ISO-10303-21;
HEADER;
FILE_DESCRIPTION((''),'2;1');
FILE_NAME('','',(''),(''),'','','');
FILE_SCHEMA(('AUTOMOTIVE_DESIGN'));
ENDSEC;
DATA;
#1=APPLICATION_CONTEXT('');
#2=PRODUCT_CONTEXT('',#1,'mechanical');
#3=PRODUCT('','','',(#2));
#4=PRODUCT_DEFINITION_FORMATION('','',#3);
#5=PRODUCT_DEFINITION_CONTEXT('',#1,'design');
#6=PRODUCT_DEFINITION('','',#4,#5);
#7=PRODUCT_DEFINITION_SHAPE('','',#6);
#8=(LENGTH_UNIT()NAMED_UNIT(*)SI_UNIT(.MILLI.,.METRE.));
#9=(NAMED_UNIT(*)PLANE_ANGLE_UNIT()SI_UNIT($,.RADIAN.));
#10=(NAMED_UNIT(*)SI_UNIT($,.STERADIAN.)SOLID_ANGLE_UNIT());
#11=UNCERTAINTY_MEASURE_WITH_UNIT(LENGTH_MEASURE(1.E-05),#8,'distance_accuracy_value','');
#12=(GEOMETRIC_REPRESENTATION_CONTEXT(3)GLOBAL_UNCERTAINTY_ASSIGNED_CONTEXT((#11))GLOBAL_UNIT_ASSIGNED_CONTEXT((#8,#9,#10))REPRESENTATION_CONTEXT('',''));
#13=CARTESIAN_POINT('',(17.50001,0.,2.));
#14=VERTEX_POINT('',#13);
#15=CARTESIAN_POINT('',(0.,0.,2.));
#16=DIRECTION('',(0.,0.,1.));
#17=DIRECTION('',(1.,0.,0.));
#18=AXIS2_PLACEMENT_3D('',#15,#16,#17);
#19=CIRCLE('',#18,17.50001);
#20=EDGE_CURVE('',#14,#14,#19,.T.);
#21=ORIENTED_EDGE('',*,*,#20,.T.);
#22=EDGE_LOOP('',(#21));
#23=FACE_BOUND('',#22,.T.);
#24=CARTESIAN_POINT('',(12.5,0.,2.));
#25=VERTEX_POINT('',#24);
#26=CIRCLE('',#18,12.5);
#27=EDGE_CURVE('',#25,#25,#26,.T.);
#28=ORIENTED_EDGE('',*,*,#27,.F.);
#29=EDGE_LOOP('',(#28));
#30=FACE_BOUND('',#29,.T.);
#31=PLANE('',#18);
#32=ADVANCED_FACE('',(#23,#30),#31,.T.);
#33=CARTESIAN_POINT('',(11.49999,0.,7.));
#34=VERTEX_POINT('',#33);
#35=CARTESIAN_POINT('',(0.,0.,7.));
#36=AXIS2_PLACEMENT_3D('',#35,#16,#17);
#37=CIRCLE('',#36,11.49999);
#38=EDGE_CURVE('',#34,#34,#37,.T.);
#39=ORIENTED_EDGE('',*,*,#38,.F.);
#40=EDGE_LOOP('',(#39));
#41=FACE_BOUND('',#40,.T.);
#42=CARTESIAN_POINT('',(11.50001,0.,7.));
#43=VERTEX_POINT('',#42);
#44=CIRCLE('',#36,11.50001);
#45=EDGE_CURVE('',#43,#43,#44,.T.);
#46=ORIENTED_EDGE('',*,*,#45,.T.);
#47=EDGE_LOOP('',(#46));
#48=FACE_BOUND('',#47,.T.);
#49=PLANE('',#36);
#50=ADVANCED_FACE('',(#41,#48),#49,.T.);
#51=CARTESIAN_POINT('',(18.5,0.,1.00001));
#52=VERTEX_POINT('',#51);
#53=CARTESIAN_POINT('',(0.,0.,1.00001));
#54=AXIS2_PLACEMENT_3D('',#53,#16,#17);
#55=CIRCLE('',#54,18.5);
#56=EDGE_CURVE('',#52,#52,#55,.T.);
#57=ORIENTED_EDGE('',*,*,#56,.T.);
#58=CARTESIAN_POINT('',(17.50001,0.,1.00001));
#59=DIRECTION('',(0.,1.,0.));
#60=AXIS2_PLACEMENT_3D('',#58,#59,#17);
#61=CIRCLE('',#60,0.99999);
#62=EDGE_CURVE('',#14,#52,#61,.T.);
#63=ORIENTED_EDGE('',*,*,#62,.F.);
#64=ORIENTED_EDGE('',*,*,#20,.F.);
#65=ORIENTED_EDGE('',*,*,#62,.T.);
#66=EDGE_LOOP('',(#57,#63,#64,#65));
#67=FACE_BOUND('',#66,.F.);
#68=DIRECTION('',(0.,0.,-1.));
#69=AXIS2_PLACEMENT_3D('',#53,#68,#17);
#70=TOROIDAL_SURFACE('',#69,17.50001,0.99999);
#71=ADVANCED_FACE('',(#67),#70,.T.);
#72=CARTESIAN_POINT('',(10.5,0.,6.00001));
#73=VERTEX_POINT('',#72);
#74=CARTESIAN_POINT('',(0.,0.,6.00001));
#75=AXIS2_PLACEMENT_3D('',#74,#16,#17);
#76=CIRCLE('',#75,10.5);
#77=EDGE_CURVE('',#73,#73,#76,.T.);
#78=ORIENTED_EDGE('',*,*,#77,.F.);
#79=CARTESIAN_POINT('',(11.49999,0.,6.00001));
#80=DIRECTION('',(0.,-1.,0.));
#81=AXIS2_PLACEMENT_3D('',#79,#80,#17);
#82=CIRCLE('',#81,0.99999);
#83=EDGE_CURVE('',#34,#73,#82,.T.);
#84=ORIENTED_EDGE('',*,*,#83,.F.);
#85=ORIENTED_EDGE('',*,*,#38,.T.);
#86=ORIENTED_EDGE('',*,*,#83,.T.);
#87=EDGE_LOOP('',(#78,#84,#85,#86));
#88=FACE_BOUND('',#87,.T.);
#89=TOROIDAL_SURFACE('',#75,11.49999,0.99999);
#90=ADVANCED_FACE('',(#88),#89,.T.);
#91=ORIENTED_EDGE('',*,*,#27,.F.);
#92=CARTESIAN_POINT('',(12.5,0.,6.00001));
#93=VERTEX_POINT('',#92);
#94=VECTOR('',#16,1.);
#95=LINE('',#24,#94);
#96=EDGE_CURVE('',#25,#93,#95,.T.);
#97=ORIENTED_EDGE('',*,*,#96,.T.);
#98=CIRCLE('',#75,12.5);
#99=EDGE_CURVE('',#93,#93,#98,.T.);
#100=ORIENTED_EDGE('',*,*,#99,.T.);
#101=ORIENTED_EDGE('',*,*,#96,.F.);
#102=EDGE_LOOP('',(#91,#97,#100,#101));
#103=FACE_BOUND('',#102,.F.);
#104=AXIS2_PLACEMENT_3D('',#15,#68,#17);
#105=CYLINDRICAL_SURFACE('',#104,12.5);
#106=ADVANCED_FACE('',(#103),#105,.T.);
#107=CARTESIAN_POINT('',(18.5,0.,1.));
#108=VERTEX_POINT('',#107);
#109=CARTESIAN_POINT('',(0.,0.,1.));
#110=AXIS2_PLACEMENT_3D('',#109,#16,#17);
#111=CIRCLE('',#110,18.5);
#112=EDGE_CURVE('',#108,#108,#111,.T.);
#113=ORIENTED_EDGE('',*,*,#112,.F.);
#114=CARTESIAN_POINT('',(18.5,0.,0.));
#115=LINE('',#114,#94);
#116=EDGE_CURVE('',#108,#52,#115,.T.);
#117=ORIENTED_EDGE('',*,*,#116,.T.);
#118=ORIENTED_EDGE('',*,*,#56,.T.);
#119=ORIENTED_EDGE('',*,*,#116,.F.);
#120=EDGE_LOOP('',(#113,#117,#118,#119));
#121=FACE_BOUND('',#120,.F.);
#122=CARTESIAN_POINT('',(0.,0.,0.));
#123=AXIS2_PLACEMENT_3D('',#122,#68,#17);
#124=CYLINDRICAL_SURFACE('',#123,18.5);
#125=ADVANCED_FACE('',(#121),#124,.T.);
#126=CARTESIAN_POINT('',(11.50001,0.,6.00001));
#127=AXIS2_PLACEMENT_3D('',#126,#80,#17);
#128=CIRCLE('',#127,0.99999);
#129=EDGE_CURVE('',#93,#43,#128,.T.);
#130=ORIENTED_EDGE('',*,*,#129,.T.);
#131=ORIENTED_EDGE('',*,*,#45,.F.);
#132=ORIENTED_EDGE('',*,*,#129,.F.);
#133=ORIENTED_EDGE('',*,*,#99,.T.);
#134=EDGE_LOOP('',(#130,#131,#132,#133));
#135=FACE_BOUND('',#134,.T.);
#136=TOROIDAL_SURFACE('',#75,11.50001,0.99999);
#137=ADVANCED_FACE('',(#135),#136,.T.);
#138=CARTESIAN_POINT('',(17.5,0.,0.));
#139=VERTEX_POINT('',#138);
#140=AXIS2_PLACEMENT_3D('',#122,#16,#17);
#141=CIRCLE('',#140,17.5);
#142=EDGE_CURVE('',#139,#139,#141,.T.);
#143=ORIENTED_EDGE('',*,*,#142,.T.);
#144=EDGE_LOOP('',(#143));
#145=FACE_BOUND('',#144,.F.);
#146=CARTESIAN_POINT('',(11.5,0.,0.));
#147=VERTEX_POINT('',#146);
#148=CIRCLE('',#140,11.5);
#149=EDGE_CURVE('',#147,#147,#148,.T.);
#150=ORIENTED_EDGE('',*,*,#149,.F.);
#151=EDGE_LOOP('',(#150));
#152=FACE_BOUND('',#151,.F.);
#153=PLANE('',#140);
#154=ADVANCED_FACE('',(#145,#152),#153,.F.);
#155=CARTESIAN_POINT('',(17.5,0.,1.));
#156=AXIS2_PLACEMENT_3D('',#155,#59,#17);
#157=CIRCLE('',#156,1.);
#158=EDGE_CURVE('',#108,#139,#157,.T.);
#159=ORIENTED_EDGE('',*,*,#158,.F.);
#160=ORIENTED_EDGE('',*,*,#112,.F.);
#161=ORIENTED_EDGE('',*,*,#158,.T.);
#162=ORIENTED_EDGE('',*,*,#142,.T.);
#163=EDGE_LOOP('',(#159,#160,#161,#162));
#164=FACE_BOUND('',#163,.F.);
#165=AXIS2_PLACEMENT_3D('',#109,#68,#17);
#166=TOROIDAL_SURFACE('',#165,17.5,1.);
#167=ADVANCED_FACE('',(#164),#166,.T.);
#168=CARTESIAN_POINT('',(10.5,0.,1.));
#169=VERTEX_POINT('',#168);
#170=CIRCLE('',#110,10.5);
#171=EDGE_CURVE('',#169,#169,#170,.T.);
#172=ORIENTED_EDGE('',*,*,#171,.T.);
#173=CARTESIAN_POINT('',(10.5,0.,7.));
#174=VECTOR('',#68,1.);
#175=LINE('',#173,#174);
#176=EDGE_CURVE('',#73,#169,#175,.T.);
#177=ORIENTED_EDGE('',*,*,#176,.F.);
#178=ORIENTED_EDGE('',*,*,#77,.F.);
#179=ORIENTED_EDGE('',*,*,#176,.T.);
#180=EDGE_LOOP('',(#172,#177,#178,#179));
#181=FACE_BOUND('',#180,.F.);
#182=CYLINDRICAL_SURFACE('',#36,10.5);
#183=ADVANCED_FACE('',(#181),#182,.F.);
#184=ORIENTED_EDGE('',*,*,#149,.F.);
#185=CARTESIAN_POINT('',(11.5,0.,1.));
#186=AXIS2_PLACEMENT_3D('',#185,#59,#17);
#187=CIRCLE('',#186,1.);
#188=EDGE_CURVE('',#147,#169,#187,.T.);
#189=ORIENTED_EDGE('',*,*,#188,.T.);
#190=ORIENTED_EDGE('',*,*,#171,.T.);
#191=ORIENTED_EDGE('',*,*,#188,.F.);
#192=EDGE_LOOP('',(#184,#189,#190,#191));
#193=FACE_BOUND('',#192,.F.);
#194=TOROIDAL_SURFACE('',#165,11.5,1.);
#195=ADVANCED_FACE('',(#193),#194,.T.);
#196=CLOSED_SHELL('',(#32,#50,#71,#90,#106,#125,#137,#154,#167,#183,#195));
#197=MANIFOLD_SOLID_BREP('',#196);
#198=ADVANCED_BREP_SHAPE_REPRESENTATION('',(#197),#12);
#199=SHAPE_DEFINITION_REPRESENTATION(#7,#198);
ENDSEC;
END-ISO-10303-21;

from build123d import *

# Parameters (mm, degrees)
F0_R     = 18.5
F1_DEPTH = 2
F2_R     = 12.5
F3_DEPTH = 5
F4_R     = 10.5
F5_DEPTH = 25
F6_R     = 1
F7_R     = 0.99999
F8_R     = 0.99999


# Not quite as in the source:
# - a fillet or chamfer is up to 0.001 mm smaller than in the source, because OpenCascade refuses the exact size


with BuildPart() as f1:
    # F0 (on Top) → F1 (new body)
    with BuildSketch(Plane.XY):
        Circle(F0_R)
    extrude(amount=F1_DEPTH)

    # F2 (on face) → F3 (join)
    with BuildSketch(Plane.XY.offset(2)):
        Circle(F2_R)
    extrude(amount=F3_DEPTH)

    # F4 (on face) → F5 (cut)
    with BuildSketch(Plane.XY.offset(7)):
        Circle(F4_R)
    extrude(amount=-F5_DEPTH, mode=Mode.SUBTRACT)

    # F6
    f6_edges = [f1.edges().sort_by_distance(p)[0] for p in [
        (-18.5, 0, 0),
        (-10.5, 0, 0),
    ]]
    fillet(f6_edges, radius=F6_R)

    # F7 (radius 1 in the source; OpenCascade refuses exactly that, so slightly less here)
    f7_edges = [f1.edges().sort_by_distance(p)[0] for p in [
        (-12.5, 0, 7),
        (-10.5, 0, 7),
    ]]
    fillet(f7_edges, radius=F7_R)

    # F8 (radius 1 in the source; OpenCascade refuses exactly that, so slightly less here)
    f8_edges = [f1.edges().sort_by_distance(p)[0] for p in [
        (-18.5, 0, 2),
    ]]
    fillet(f8_edges, radius=F8_R)


solid = f1.part
